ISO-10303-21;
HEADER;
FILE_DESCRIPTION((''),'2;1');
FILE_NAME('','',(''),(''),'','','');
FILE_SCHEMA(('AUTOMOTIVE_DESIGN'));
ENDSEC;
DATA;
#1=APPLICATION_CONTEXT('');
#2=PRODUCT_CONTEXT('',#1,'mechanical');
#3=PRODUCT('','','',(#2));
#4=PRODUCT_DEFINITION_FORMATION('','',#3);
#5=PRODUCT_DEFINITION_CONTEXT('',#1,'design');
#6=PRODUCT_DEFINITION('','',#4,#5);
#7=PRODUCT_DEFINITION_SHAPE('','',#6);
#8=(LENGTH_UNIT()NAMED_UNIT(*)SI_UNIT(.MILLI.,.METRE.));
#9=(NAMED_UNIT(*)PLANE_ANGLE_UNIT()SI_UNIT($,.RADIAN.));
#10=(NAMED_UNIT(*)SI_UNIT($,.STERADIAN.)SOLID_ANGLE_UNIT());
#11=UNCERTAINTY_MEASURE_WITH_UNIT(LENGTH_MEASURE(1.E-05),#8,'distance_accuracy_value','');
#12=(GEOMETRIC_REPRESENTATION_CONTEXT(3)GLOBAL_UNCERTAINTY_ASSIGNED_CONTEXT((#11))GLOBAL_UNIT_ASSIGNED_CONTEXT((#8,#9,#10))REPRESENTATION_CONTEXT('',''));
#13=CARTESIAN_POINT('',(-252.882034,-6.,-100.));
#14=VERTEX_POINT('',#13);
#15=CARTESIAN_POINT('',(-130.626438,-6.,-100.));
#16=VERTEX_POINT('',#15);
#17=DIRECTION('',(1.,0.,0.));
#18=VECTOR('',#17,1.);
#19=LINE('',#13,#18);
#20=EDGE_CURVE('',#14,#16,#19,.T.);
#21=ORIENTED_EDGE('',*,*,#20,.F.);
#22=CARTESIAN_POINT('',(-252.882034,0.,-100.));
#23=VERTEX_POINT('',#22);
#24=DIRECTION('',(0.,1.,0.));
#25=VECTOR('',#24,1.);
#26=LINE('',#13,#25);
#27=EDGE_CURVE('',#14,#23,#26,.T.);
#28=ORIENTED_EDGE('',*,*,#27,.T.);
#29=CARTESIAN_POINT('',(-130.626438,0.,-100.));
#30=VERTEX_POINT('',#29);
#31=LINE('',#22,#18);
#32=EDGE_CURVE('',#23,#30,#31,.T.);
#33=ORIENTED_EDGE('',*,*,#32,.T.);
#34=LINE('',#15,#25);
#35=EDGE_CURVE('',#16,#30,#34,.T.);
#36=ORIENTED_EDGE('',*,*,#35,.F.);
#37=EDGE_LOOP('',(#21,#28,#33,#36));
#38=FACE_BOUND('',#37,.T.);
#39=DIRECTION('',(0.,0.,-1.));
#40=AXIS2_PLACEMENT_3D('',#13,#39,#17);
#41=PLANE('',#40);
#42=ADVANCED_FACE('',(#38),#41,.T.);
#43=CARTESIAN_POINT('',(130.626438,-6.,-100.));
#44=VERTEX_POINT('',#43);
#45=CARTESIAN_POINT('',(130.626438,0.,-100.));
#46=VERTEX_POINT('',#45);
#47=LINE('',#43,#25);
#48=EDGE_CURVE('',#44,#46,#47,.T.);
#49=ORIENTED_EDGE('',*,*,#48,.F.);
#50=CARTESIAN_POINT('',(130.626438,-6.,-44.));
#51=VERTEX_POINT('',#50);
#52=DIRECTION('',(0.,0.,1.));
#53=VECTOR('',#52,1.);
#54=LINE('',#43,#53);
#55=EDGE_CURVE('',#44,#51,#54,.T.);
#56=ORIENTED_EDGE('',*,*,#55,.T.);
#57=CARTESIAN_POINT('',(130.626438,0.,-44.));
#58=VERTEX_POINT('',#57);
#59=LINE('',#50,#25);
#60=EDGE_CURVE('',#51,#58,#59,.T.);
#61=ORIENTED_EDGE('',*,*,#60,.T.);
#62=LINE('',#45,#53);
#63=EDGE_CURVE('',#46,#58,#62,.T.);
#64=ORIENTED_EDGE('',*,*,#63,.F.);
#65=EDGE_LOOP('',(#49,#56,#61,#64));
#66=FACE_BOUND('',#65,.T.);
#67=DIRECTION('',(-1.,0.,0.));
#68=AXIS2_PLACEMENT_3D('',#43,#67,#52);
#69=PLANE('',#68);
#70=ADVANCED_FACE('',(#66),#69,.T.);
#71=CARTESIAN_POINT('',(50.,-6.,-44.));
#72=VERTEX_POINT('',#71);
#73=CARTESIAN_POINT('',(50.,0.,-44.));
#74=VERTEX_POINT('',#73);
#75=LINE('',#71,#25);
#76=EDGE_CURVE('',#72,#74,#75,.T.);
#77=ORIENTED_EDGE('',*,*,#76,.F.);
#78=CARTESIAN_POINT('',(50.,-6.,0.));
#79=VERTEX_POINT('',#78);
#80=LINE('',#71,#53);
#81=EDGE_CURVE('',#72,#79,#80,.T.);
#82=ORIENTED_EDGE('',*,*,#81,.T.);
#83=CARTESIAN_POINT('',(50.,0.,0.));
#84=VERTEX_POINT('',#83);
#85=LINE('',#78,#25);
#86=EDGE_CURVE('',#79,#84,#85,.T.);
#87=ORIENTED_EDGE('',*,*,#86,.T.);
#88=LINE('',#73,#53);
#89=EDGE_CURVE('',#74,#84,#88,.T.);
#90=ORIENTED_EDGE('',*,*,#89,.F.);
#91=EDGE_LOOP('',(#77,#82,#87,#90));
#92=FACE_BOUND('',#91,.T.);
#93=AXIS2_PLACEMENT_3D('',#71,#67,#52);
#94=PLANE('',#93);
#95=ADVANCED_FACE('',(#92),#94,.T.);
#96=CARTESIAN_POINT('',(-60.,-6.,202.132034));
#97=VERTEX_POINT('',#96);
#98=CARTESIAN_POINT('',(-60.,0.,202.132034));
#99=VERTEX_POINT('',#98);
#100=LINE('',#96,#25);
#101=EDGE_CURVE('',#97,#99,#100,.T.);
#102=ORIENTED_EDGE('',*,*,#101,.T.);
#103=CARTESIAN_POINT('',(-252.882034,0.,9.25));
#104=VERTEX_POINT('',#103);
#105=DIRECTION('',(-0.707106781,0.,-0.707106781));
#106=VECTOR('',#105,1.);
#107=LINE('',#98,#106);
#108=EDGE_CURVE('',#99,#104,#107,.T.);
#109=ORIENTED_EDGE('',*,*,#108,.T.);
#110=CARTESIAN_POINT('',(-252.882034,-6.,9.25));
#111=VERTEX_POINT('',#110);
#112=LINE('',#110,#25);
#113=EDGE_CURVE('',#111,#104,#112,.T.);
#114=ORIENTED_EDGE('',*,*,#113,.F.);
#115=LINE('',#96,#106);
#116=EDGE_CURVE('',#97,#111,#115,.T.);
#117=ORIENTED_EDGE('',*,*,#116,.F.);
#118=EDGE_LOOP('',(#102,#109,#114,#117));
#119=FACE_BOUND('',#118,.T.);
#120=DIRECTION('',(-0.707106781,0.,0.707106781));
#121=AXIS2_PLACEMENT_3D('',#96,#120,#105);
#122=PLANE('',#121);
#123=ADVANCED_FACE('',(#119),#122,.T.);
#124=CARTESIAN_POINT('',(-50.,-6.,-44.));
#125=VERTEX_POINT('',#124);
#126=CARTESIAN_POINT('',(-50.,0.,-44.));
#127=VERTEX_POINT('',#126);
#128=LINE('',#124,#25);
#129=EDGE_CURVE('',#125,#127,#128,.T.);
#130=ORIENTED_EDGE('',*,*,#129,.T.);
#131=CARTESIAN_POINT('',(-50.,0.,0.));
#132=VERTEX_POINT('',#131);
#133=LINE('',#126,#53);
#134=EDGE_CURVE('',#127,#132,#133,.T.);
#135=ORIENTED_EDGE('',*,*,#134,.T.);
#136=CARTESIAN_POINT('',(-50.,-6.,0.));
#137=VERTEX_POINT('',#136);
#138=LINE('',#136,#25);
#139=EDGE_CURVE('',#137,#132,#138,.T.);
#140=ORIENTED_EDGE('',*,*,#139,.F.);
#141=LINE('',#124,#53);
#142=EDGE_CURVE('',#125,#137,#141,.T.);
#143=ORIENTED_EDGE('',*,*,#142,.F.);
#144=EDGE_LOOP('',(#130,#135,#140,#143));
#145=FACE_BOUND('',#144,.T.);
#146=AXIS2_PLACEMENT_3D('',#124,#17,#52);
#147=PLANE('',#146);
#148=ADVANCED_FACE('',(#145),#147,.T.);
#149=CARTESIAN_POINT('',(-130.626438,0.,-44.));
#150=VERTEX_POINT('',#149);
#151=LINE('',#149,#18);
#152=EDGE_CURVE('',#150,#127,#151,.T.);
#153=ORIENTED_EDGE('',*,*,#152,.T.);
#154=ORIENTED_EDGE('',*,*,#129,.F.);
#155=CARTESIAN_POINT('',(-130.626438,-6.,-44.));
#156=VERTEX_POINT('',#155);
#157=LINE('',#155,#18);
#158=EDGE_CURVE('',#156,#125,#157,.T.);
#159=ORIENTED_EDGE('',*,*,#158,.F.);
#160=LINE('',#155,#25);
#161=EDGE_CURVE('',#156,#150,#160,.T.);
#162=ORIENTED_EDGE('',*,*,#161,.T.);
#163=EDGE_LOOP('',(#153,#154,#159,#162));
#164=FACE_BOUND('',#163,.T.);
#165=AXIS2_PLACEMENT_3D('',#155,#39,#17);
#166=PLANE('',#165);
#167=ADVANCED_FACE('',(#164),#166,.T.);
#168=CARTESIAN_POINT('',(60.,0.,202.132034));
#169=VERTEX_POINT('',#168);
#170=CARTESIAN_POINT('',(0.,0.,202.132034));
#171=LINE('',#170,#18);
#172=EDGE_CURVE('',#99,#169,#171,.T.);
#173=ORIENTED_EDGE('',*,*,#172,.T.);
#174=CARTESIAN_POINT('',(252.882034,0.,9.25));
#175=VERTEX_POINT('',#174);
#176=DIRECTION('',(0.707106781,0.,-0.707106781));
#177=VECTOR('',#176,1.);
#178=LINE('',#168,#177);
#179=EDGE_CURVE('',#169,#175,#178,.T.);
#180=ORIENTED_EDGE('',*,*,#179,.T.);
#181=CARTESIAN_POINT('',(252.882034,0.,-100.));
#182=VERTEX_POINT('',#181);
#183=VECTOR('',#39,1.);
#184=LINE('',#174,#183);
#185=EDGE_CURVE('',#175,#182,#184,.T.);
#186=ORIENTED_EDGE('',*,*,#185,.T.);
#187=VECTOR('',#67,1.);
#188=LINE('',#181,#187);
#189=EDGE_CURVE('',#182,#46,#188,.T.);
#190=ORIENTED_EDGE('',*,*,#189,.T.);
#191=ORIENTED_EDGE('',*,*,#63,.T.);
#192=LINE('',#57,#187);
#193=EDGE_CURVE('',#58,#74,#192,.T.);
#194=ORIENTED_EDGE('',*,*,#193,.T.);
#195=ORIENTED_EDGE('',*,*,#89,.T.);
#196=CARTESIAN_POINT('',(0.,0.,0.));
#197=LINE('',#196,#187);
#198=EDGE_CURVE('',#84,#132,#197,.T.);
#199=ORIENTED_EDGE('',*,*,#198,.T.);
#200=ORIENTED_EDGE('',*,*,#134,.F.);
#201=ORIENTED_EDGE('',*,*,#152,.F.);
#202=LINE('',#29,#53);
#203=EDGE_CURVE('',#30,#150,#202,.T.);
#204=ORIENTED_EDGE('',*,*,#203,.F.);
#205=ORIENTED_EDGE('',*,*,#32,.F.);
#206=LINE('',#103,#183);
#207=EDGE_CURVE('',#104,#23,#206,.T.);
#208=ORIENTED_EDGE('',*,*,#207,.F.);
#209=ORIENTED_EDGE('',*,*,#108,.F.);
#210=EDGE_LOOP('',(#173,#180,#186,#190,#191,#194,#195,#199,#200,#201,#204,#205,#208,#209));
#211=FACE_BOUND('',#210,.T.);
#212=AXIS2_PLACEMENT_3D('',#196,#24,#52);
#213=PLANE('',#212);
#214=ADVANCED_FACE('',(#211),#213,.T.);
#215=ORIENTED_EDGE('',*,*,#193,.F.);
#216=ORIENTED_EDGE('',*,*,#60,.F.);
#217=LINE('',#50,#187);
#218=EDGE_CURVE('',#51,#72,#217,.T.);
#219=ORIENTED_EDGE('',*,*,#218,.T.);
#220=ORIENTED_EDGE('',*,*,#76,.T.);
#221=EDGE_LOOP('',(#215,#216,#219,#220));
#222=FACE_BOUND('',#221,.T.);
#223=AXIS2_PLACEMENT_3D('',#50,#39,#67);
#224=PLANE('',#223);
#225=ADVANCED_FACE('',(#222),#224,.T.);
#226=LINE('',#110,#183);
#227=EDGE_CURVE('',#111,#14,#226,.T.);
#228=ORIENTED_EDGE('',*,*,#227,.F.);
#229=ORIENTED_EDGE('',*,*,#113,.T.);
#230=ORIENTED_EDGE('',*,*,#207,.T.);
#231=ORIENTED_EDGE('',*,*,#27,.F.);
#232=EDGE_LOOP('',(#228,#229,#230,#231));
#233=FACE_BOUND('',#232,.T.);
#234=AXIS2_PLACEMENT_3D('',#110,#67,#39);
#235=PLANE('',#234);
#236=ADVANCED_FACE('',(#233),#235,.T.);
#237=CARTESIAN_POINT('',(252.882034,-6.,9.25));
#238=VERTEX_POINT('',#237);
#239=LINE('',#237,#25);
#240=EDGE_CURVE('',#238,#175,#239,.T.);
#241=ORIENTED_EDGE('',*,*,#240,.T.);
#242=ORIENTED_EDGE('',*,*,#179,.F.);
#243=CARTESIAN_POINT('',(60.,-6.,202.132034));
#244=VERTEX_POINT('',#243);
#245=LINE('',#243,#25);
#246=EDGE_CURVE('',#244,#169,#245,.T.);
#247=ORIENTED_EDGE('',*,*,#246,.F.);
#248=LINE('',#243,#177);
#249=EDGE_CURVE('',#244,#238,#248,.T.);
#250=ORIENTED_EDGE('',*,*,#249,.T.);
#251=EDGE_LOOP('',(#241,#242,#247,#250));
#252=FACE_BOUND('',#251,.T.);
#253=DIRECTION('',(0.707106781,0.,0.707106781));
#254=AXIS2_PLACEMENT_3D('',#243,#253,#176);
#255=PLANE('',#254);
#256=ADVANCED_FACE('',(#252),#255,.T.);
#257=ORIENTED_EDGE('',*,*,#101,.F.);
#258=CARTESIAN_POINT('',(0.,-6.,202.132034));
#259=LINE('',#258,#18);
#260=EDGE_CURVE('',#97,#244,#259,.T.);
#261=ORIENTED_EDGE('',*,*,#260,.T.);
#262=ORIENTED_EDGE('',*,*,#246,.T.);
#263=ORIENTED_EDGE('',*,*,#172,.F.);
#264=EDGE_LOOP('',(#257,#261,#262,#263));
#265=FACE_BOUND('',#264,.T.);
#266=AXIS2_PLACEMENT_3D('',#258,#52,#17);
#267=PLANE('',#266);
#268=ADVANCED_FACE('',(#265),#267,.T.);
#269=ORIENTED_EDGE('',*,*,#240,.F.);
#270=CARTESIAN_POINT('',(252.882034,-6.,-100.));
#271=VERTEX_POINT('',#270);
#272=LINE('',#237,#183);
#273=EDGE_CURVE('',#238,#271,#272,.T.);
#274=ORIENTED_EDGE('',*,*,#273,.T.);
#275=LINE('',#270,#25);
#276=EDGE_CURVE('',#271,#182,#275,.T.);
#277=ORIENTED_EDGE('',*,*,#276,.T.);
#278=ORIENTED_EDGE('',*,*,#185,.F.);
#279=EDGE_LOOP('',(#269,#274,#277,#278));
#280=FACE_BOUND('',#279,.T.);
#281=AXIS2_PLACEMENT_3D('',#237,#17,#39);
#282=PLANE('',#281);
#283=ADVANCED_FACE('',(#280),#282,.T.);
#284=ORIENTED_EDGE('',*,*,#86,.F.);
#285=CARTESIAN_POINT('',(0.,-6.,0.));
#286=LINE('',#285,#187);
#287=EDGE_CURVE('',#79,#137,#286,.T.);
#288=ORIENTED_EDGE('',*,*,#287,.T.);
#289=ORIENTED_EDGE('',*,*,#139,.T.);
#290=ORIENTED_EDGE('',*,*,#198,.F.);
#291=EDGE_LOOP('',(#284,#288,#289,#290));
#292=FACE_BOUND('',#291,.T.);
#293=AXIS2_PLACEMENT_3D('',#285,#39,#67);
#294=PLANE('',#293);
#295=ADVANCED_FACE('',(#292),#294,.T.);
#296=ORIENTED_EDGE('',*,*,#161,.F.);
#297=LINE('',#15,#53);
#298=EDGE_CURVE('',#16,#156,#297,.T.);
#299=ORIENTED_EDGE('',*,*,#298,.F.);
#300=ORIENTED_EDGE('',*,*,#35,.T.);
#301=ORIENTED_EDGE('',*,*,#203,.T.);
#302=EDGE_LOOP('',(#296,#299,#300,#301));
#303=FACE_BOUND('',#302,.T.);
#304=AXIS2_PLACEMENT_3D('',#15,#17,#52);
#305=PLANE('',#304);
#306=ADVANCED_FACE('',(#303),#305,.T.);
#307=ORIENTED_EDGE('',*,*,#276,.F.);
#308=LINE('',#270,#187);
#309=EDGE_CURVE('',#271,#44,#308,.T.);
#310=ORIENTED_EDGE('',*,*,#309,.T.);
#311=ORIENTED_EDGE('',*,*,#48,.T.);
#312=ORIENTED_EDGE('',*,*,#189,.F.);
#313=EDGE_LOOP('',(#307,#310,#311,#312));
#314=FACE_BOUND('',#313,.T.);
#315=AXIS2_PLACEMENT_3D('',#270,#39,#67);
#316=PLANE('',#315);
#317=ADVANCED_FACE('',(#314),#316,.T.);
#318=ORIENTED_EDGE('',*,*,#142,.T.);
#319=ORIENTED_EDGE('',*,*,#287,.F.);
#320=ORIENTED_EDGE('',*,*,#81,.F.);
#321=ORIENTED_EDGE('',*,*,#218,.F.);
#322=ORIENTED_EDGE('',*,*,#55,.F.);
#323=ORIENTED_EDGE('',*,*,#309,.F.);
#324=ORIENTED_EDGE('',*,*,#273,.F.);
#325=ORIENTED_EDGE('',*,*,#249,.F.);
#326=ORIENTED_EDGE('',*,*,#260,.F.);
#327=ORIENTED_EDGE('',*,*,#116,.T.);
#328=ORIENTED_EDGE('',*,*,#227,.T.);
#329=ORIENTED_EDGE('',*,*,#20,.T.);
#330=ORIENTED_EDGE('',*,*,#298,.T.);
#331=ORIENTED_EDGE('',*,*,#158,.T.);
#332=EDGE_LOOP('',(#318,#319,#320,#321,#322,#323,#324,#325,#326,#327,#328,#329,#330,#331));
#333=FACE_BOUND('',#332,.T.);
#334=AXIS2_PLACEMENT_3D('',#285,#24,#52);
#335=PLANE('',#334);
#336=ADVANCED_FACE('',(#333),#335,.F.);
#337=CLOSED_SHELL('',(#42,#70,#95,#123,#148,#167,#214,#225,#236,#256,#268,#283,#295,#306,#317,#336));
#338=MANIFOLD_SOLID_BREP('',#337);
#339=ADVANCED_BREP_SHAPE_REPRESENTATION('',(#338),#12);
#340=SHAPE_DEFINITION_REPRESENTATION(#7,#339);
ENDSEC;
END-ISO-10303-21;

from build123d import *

# Parameters (mm, degrees)
SM_BASE_FLANGE_1_DEPTH = 6


# Sheet-metal steps are written as plain solids
with BuildPart() as part:
    # Sketch 1 → Базовая кромка1 (new body)
    with BuildSketch(Plane(origin=(0, 0, 0), x_dir=(1, 0, 0), z_dir=(0, 1, 0))):
        Polygon((0, -202.132034356), (60, -202.132034356), (252.882034356, -9.25), (252.882034356, 100), (130.626438318, 100), (130.626438318, 44), (50, 44), (50, 0), (0, 0), align=None)
    extrude(amount=-SM_BASE_FLANGE_1_DEPTH)

    # Зеркальное отражение1: part across plane


with BuildPart() as part_1:
    add(part.part)
    add(part.part.mirror(Plane(origin=(0, -6, 0), x_dir=(0, 0, 1), z_dir=(-1, 0, 0))))


solid = part_1.part
